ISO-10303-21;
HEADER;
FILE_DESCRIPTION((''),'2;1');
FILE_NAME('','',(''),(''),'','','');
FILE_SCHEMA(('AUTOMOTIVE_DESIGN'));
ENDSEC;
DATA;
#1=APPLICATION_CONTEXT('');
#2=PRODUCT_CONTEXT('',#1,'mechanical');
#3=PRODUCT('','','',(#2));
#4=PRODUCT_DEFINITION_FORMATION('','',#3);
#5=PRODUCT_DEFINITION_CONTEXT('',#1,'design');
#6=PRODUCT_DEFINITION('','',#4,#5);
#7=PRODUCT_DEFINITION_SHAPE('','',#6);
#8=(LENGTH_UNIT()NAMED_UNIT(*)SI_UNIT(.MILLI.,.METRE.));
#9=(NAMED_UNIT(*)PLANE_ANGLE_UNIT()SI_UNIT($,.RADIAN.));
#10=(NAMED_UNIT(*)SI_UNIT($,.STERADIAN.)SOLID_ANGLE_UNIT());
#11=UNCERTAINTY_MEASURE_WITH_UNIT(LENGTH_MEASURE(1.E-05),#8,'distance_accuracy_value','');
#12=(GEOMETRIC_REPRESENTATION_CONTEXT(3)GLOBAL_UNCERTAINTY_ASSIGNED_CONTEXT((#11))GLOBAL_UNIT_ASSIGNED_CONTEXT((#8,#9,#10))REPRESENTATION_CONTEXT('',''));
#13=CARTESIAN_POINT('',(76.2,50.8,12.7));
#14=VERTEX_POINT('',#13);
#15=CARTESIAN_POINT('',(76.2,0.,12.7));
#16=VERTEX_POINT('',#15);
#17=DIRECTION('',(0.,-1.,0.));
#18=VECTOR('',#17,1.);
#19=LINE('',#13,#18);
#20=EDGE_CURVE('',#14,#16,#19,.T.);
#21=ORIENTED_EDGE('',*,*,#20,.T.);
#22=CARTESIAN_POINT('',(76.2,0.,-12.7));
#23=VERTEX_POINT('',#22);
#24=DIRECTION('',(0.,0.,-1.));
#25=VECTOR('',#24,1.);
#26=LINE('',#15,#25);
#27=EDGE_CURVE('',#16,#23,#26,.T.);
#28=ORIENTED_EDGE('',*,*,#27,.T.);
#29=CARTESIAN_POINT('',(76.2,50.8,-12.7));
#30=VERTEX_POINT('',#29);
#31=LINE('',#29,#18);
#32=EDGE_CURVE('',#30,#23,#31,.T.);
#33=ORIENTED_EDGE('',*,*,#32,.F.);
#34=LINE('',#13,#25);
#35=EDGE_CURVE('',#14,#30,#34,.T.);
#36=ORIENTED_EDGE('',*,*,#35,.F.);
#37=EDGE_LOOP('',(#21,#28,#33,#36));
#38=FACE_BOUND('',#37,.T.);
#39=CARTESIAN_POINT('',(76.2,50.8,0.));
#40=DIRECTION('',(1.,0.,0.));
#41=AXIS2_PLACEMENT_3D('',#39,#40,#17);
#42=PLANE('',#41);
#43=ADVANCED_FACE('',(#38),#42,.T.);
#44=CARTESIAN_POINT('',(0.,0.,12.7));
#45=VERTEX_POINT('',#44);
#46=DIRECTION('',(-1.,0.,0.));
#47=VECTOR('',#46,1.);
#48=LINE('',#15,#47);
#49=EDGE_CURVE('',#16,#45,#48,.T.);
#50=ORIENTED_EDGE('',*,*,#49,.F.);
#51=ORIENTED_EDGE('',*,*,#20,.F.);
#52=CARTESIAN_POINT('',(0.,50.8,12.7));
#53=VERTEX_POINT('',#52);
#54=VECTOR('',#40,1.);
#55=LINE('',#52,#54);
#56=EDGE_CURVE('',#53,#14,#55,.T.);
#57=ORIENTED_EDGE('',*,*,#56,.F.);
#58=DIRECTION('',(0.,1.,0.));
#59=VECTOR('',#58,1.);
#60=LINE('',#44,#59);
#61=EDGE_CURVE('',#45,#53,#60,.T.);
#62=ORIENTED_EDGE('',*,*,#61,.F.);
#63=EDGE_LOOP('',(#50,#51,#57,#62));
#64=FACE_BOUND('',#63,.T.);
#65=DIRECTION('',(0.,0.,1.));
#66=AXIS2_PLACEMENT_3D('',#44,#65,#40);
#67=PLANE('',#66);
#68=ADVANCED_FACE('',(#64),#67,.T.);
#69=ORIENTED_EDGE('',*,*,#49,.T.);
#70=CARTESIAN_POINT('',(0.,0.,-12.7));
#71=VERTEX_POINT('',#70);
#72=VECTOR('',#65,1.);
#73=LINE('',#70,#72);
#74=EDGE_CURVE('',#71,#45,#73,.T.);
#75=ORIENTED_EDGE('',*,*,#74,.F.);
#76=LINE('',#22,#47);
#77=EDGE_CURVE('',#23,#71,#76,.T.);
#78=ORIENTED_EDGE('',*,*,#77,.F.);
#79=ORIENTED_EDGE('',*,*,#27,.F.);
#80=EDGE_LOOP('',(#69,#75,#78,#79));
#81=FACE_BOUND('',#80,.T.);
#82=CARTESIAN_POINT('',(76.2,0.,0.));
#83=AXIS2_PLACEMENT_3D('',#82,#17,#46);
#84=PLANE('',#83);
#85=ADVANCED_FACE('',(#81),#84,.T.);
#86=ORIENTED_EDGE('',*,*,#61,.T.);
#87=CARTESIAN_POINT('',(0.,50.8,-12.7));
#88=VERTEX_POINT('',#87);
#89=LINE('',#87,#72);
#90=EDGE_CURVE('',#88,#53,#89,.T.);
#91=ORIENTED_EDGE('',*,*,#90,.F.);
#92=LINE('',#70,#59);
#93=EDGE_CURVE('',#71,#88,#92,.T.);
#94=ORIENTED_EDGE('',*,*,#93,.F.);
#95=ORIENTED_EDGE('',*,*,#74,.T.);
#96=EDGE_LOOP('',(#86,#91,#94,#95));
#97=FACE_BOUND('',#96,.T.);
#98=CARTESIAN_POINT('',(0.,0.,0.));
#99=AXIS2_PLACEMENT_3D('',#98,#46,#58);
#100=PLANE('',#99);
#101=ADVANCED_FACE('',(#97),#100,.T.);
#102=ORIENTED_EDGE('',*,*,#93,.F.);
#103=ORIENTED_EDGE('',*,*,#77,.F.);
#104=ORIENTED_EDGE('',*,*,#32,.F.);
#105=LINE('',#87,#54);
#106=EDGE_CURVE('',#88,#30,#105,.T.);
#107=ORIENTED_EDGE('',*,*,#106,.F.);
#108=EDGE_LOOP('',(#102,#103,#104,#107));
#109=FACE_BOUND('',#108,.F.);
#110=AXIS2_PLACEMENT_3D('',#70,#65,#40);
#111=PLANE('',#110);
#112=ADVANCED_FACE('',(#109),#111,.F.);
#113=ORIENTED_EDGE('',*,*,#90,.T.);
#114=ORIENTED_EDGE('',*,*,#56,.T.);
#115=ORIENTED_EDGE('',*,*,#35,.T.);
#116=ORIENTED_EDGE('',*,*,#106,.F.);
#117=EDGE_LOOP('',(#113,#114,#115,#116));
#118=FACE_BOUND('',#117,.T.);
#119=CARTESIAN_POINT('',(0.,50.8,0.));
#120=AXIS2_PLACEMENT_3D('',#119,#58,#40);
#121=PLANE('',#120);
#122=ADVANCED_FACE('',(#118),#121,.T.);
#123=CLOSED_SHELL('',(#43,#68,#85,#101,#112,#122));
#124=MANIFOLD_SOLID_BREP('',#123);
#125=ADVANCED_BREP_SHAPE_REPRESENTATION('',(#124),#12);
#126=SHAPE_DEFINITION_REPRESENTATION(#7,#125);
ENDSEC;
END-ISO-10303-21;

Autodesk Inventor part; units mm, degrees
ref_plane "YZ Plane" through (0, 0, 0) normal (1, 0, 0) x (0, 1, 0)
ref_plane "XZ Plane" through (0, 0, 0) normal (0, 1, 0) x (-1, 0, 0)
ref_plane "XY Plane" through (0, 0, 0) normal (0, 0, 1) x (1, 0, 0)
sketch "Sketch1" plane through (0, 0, 0) normal (0, 0, 1) x (1, 0, 0)
  line L0 (0, 50.8) -> (76.2, 50.8)
  line L1 (76.2, 50.8) -> (76.2, 0)
  line L2 (76.2, 0) -> (0, 0)
  line L3 (0, 0) -> (0, 50.8)
extrude "Extrusion1" add sketch "Sketch1" along normal mid plane 25.4
properties part number "Block, Corner Constrained" material "Steel, MS"
